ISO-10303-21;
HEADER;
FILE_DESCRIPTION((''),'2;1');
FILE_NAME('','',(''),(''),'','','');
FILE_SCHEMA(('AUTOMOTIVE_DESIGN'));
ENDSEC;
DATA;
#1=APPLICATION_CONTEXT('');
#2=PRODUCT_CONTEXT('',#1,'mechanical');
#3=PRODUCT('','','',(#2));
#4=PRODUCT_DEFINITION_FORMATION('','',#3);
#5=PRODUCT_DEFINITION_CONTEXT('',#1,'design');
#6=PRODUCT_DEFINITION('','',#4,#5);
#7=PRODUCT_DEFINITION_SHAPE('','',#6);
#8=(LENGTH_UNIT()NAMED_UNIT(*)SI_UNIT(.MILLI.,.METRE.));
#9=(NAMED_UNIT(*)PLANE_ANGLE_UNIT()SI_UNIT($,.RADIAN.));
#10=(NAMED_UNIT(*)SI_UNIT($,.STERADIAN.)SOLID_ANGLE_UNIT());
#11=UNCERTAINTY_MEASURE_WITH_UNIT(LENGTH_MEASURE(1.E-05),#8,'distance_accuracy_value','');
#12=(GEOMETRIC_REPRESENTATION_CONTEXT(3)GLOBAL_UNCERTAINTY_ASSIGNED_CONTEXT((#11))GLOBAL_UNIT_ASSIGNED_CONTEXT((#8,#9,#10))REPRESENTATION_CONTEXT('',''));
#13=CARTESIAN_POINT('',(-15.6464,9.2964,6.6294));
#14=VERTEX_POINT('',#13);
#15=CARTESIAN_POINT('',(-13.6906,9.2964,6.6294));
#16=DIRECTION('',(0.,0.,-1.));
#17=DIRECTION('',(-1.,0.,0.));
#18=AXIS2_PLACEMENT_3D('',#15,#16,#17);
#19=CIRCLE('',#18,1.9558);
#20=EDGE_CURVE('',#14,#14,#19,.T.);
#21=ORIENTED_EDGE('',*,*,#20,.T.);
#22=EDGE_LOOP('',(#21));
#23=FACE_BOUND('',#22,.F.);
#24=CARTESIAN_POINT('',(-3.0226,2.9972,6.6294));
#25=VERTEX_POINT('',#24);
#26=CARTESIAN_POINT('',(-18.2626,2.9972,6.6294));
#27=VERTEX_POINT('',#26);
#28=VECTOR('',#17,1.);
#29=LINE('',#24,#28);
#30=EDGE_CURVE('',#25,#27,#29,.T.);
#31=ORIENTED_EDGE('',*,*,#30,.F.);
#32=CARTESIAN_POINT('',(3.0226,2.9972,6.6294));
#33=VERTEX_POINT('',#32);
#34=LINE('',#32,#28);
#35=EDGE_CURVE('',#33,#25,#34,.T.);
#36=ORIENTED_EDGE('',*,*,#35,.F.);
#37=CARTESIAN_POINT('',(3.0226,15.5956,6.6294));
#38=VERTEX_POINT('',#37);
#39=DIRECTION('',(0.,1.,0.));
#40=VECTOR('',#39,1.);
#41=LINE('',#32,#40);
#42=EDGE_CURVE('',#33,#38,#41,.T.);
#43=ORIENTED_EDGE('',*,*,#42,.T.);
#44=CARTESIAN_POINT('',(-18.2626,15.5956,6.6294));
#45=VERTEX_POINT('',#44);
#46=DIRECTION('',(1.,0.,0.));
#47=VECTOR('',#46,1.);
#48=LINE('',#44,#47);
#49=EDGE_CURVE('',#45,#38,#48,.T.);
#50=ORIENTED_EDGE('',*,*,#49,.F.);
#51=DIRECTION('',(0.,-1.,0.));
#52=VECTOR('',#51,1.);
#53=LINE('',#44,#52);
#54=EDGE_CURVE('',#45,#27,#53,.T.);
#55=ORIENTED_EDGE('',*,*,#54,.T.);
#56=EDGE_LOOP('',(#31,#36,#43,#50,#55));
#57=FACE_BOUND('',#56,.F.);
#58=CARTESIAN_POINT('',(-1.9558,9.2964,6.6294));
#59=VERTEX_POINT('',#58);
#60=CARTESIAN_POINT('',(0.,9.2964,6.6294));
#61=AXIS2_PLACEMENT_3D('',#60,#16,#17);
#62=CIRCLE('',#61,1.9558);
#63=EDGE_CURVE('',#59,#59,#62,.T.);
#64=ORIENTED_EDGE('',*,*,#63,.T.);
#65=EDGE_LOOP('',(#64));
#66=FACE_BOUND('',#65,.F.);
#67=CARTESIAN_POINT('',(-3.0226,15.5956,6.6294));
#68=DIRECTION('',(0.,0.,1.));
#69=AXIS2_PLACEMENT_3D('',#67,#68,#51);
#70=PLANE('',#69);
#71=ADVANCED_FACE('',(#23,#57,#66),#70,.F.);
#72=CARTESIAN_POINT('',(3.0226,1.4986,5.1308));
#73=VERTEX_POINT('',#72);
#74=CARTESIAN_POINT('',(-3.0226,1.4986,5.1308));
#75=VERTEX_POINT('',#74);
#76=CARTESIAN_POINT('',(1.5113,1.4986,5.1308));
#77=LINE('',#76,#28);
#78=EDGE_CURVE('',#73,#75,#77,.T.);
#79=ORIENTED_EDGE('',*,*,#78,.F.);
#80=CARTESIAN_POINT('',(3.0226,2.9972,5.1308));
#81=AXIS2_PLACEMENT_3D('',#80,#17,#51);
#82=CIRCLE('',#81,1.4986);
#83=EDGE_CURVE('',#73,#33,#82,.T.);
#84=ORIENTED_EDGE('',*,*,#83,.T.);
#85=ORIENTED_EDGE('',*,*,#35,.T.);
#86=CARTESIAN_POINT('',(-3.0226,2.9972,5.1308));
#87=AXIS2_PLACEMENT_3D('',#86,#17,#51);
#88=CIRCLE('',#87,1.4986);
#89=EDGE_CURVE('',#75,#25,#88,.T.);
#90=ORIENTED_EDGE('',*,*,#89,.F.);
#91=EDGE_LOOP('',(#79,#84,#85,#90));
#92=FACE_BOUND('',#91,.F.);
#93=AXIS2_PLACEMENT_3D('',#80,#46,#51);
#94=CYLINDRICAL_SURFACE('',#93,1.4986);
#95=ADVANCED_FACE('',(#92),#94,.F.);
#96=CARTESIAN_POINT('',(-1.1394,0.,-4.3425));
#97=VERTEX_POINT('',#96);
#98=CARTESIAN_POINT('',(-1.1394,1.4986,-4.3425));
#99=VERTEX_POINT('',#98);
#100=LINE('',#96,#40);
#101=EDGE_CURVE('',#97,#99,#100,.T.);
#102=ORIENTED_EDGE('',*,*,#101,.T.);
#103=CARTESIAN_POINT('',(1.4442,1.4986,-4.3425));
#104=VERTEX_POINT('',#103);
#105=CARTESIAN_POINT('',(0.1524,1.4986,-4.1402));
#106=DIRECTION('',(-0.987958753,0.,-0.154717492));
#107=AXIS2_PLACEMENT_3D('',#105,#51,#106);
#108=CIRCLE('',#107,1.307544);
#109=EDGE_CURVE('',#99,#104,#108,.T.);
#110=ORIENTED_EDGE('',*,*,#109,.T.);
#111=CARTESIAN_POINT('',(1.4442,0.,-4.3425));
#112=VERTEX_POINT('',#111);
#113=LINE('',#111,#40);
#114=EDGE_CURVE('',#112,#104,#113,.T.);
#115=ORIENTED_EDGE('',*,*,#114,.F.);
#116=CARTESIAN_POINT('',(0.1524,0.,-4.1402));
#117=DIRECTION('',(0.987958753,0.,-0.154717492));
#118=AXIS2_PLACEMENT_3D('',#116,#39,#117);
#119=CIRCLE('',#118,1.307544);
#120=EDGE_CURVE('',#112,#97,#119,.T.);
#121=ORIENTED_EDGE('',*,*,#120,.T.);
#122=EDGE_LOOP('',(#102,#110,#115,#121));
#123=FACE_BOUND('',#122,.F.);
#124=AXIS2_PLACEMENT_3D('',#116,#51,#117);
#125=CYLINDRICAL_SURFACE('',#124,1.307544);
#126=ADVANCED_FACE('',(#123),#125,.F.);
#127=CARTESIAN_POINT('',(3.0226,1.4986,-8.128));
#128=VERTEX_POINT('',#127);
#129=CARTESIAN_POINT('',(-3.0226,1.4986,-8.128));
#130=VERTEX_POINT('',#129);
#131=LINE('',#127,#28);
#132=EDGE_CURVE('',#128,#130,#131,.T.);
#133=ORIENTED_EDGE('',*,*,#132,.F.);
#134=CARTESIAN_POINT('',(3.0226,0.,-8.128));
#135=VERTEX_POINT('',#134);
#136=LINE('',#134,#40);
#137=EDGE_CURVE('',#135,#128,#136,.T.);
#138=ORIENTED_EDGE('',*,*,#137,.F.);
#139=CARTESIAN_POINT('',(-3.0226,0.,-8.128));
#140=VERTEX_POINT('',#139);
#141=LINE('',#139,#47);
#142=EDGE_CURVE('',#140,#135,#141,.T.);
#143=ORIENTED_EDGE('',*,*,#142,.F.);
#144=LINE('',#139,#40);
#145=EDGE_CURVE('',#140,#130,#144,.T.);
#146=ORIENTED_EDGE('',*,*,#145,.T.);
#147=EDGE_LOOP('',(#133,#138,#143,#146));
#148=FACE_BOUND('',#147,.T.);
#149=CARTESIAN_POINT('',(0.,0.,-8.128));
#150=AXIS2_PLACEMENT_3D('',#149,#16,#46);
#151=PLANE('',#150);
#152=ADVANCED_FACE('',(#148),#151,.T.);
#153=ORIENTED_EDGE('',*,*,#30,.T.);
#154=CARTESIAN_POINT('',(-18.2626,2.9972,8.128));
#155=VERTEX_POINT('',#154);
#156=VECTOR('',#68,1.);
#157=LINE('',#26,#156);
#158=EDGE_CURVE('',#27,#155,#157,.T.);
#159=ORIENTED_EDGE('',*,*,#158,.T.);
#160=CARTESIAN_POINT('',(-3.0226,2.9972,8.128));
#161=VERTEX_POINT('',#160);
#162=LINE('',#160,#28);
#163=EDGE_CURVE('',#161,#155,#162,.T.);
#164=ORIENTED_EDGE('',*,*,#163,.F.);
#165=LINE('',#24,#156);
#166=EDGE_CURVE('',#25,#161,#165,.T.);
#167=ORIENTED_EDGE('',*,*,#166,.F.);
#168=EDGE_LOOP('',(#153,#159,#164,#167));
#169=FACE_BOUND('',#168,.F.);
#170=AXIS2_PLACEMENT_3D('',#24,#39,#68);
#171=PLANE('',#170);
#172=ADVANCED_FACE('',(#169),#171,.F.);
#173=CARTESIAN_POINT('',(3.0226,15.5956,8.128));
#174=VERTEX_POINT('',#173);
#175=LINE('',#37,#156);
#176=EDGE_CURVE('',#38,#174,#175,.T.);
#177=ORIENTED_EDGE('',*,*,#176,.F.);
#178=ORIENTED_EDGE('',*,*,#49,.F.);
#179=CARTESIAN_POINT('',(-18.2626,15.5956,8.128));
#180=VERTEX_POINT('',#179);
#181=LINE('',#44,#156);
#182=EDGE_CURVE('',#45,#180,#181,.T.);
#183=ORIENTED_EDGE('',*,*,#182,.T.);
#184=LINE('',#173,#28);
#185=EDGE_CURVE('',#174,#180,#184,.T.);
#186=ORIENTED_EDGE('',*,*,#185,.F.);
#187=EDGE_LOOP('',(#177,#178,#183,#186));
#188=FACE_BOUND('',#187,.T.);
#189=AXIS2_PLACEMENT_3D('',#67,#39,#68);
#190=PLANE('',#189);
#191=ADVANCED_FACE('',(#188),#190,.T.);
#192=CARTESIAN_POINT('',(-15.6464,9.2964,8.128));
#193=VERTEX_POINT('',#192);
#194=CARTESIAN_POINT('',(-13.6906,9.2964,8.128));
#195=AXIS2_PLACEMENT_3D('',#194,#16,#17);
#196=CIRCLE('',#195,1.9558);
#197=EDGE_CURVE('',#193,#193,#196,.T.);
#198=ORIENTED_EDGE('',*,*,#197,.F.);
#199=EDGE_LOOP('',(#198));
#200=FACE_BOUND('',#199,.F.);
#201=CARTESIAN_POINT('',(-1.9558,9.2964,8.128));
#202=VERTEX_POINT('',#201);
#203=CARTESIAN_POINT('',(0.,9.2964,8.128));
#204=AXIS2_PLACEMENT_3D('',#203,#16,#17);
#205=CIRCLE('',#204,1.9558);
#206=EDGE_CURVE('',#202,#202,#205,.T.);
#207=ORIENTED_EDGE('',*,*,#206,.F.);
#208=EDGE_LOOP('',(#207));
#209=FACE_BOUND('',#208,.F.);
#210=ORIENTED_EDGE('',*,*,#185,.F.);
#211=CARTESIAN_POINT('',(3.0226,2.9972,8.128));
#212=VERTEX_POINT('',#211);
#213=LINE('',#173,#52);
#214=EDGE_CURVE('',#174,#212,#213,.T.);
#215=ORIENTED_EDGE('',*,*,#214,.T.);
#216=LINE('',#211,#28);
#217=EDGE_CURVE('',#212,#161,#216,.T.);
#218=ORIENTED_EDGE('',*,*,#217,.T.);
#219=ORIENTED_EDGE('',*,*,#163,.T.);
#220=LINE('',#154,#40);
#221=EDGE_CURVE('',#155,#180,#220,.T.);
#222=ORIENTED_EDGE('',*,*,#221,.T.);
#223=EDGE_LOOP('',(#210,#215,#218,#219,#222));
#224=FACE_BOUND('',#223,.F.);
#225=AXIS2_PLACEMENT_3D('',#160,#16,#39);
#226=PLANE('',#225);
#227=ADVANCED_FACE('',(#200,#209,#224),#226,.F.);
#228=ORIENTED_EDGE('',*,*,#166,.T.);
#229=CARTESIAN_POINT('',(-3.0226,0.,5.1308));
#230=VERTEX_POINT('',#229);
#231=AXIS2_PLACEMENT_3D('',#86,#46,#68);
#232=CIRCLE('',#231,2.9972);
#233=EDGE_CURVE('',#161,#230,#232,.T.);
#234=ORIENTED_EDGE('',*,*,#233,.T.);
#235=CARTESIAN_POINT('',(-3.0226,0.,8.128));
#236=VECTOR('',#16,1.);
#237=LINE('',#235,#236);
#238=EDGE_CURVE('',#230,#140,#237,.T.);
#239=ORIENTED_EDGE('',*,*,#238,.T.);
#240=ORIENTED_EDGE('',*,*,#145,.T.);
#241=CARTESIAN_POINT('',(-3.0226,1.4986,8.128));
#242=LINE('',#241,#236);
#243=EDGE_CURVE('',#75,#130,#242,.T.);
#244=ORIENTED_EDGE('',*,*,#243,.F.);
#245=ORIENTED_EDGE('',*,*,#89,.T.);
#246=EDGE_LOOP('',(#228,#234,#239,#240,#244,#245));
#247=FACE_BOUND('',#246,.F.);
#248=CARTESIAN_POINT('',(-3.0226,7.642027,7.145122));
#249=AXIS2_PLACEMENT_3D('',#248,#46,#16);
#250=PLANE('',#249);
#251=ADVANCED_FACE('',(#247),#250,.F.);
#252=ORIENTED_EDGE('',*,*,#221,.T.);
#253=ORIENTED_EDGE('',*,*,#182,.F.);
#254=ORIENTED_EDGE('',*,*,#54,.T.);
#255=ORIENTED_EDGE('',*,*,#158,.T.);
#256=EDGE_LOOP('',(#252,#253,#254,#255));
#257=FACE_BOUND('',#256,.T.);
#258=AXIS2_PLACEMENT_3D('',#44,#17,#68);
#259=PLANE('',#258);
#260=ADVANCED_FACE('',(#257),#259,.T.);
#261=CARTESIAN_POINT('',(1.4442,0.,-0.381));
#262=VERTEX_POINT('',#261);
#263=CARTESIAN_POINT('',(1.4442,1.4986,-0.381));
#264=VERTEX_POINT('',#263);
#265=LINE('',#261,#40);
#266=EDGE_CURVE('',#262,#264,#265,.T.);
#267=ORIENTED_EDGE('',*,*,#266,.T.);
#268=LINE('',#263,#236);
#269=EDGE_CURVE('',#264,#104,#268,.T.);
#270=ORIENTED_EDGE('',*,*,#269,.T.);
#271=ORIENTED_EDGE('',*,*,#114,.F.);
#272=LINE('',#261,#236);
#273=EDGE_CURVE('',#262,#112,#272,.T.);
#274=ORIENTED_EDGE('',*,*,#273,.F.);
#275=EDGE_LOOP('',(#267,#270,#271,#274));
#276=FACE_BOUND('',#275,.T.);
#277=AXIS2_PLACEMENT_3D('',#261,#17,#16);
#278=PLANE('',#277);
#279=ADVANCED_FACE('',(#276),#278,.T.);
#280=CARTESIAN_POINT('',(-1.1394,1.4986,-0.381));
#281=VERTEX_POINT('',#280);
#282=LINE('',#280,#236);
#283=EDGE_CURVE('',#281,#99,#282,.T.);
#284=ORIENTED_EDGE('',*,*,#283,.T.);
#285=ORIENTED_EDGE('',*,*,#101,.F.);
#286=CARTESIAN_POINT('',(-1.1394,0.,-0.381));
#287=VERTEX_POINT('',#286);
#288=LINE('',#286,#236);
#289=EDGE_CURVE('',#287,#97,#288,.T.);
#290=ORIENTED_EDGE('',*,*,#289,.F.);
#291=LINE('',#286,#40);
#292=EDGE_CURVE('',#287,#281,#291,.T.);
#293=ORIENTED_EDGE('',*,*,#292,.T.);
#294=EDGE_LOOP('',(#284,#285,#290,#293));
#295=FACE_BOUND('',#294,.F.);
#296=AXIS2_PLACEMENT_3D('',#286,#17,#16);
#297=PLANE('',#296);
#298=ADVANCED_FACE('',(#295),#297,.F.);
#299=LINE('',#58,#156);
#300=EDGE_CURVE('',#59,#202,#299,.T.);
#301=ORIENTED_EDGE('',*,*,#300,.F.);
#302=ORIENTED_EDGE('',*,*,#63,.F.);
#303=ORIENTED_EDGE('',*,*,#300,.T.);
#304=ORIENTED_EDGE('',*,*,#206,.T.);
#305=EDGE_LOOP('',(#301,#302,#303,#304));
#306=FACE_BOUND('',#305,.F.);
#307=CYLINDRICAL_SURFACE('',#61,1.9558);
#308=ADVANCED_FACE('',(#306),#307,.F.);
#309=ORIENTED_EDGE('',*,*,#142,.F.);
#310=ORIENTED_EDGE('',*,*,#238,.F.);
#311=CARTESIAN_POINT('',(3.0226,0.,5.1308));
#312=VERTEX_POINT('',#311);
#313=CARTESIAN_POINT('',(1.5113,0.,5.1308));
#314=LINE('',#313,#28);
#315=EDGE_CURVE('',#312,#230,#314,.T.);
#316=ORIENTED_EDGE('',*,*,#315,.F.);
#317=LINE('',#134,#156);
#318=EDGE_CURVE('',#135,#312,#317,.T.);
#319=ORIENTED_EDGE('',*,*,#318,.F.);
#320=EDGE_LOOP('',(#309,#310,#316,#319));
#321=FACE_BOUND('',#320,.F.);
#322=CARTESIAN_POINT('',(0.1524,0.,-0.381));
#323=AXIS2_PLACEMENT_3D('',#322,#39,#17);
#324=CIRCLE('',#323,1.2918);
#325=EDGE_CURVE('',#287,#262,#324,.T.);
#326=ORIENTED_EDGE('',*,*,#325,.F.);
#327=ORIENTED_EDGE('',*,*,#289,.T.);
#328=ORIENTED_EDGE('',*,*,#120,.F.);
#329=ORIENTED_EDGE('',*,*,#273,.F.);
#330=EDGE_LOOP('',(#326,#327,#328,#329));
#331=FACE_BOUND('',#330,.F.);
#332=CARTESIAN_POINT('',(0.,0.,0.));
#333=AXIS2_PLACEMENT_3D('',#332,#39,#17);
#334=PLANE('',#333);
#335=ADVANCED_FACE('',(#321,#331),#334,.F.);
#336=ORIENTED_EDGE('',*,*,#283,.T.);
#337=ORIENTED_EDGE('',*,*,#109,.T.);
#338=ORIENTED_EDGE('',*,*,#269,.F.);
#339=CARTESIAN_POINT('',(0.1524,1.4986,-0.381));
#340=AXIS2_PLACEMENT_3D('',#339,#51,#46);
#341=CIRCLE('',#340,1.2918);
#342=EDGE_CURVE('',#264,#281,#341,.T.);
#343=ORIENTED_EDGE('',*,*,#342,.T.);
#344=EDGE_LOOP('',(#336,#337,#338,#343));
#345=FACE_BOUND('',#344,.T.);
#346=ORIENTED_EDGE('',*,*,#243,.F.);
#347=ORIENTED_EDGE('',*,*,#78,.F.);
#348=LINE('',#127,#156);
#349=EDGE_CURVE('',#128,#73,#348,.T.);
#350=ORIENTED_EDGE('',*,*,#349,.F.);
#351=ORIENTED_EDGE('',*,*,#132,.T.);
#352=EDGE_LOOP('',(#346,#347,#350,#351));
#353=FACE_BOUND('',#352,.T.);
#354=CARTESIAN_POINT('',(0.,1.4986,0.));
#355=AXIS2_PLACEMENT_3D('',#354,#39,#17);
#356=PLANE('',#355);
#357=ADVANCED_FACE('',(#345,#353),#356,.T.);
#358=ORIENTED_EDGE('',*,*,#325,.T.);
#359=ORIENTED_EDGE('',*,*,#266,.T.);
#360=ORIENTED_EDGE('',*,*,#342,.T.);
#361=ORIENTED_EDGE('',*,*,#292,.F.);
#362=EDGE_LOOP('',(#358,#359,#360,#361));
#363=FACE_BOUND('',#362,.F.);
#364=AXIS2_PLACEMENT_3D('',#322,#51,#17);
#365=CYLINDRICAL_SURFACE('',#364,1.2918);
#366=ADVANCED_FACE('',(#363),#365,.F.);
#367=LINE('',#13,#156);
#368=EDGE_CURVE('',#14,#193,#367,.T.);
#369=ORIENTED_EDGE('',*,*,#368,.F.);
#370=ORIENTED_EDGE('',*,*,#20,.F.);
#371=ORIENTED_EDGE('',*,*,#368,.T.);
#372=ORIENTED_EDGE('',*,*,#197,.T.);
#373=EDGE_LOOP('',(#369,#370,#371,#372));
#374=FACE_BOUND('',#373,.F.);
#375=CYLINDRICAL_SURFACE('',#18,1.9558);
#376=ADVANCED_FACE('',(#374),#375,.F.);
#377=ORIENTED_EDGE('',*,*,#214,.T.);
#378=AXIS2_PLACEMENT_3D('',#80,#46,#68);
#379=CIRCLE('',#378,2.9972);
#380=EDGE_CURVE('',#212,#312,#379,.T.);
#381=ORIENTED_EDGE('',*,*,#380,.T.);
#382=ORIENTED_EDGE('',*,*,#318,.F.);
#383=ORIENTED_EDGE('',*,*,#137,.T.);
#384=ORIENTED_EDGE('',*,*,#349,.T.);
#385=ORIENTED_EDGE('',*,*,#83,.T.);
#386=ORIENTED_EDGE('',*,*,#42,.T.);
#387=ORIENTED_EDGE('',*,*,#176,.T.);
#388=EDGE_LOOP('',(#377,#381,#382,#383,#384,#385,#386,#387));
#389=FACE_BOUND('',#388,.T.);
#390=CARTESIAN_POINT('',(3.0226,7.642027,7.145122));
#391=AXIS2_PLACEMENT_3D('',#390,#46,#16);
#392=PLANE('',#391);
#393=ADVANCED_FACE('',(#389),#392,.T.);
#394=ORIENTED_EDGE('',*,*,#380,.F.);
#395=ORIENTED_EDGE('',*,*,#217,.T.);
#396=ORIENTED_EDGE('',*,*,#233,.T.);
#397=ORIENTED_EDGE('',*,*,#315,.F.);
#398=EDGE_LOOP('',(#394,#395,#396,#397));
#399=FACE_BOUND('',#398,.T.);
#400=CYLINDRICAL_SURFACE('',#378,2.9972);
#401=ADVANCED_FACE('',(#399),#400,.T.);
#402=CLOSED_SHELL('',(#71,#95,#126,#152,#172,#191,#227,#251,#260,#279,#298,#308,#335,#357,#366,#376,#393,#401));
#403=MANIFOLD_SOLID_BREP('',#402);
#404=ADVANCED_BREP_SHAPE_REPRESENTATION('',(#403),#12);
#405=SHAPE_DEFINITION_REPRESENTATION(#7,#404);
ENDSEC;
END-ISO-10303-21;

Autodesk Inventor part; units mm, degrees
ref_plane "YZ Plane" through (0, 0, 0) normal (1, 0, 0) x (0, 1, 0)
ref_plane "XZ Plane" through (0, 0, 0) normal (0, 1, 0) x (-1, 0, 0)
ref_plane "XY Plane" through (0, 0, 0) normal (0, 0, 1) x (1, 0, 0)
sketch "Sketch1" plane through (0, 0, 0) normal (0, 1, 0) x (-1, 0, 0)
  line L0 (-3.0226, 8.128) -> (3.0226, 8.128)
  line L1 (3.0226, 8.128) -> (3.0226, -8.128)
  line L2 (3.0226, -8.128) -> (-3.0226, -8.128)
  line L3 (-3.0226, -8.128) -> (-3.0226, 8.128)
  line L4 (-3.0226, 8.128) -> (3.0226, -8.128) construction
  line L5 (3.0226, 8.128) -> (-3.0226, -8.128) construction
  line L6 (1.1394, -0.381) -> (1.1394, -4.3425)
  line L7 (-1.4442, -0.381) -> (-1.4442, -4.3425)
  arc A0 (-1.4442, -4.3425) -> (1.1394, -4.3425) centre (-0.1524, -4.1402) ccw
  arc A1 (1.1394, -0.381) -> (-1.4442, -0.381) centre (-0.1524, -0.381) ccw
  line L8 (0, 9.1418) -> (0, -10.0518)
  point P0 (0, 0)
  dimension "d0" = 16.256
  dimension "d1" = 6.0452
  dimension "d2" = 3.9878
  dimension "d3" = 7.747
  dimension "d4" = 3.175
  dimension "d5" = 3.175
extrude "Plate1" add sketch "Sketch1" along normal blind 1.4986 contours L0 L8 A1 L7 A0 L2 L3 | L0 L1 L2 L8 A0 L6 A1
sketch "Sketch2" plane through (3.0226, 0, 6.6294) normal (0, 0, 1) x (1, 0, 0)
  line L0 (-6.0452, 0) -> (0, 0)
  line L1 (0, 0) -> (0, 15.5956)
  line L2 (0, 15.5956) -> (-6.0452, 15.5956)
  line L3 (-6.0452, 15.5956) -> (-6.0452, 0)
edge flange "Flange1" height 15.5956 angle 90 thickness 1.4986 bend radius 1.4986 thickness toward (0, 0, 1) relief straight relief width 1.4986 relief depth 0.7493 edges at (0, 1.4986, 8.128) wall of the first edge with corners at (-3.0226, 0, 6.6294) (3.0226, 0, 6.6294) (3.0226, 15.5956, 6.6294) (-3.0226, 15.5956, 6.6294)
bend "Bend1"
corner "Corner1"
sketch "Sketch4" plane through (3.0226, 15.5956, 6.6294) normal (0, 0, -1) x (-1, 0, 0)
  circle A0 centre (3.0226, -6.2992) radius 1.9558
  line L0 (6.0452, 0) -> (0, 0) projected
  point P0 (3.0226, -15.5956)
  dimension "d21" = 6.2992
  dimension "d22" = 3.9116
extrude "Extrusion3" cut sketch "Sketch4" against normal blind 1.4986
sketch "Sketch5" plane through (-3.0226, 15.5956, 6.6294) normal (-1, 0, 0) x (0, 0, 1)
  line L0 (1.4986, -12.5984) -> (1.4986, 0) projected
  line L1 (0, 0) -> (1.4986, 0) projected
  line L2 (0, 0) -> (0, -12.5984) projected
  line L3 (0, -12.5984) -> (1.4986, -12.5984) projected
  line L4 (0, 0) -> (1.4986, 0)
  line L5 (1.4986, 0) -> (1.4986, -12.5984)
  line L6 (1.4986, -12.5984) -> (0, -12.5984)
  line L7 (0, -12.5984) -> (0, 0)
  point P0 (-6.6294, -15.5956)
extrude "Extrusion4" add sketch "Sketch5" along normal blind 15.24
sketch "Sketch6" plane through (3.0226, 2.9972, 6.6294) normal (0, 0, -1) x (-1, 0, 0)
  circle A0 centre (16.7132, 6.2992) radius 1.9558
  line L0 (21.2852, 12.5984) -> (21.2852, 0) projected
  line L1 (21.2852, 12.5984) -> (0, 12.5984) projected
  point P0 (3.0226, -2.9972)
  dimension "d27" = 4.572
  dimension "d28" = 6.2992
  dimension "d29" = 3.9116
extrude "Extrusion5" cut sketch "Sketch6" against normal up to surface (1.4986 mm away)
equation "\"d11\" = BendReliefWidth"
equation "\"d12\" = BendReliefDepth"
equation "\"d13\" = MinimumRemnant"
equation "\"d14\" = BendRadius"
equation "\"d17\" = BendRadius"
equation "\"d18\" = CornerReliefSize"
equation "\"d19\" = GapSize"
equation "\"d20\" = JacobiRadiusSize"
equation "\"BendRadius\" = Thickness"
equation "\"BendReliefWidth\" = Thickness"
equation "\"BendReliefDepth\" = 0.5 * Thickness"
equation "\"CornerReliefSize\" = 4 * Thickness"
equation "\"MinimumRemnant\" = 2 * Thickness"
equation "\"TransitionRadius\" = BendRadius"
equation "\"JacobiRadiusSize\" = Thickness"
equation "\"GapSize\" = Thickness"
equation "\"d10\" = BendRadius"
equation "\"Thickness\" = 1.4986"
properties part number "dsub37Bracket_right"
